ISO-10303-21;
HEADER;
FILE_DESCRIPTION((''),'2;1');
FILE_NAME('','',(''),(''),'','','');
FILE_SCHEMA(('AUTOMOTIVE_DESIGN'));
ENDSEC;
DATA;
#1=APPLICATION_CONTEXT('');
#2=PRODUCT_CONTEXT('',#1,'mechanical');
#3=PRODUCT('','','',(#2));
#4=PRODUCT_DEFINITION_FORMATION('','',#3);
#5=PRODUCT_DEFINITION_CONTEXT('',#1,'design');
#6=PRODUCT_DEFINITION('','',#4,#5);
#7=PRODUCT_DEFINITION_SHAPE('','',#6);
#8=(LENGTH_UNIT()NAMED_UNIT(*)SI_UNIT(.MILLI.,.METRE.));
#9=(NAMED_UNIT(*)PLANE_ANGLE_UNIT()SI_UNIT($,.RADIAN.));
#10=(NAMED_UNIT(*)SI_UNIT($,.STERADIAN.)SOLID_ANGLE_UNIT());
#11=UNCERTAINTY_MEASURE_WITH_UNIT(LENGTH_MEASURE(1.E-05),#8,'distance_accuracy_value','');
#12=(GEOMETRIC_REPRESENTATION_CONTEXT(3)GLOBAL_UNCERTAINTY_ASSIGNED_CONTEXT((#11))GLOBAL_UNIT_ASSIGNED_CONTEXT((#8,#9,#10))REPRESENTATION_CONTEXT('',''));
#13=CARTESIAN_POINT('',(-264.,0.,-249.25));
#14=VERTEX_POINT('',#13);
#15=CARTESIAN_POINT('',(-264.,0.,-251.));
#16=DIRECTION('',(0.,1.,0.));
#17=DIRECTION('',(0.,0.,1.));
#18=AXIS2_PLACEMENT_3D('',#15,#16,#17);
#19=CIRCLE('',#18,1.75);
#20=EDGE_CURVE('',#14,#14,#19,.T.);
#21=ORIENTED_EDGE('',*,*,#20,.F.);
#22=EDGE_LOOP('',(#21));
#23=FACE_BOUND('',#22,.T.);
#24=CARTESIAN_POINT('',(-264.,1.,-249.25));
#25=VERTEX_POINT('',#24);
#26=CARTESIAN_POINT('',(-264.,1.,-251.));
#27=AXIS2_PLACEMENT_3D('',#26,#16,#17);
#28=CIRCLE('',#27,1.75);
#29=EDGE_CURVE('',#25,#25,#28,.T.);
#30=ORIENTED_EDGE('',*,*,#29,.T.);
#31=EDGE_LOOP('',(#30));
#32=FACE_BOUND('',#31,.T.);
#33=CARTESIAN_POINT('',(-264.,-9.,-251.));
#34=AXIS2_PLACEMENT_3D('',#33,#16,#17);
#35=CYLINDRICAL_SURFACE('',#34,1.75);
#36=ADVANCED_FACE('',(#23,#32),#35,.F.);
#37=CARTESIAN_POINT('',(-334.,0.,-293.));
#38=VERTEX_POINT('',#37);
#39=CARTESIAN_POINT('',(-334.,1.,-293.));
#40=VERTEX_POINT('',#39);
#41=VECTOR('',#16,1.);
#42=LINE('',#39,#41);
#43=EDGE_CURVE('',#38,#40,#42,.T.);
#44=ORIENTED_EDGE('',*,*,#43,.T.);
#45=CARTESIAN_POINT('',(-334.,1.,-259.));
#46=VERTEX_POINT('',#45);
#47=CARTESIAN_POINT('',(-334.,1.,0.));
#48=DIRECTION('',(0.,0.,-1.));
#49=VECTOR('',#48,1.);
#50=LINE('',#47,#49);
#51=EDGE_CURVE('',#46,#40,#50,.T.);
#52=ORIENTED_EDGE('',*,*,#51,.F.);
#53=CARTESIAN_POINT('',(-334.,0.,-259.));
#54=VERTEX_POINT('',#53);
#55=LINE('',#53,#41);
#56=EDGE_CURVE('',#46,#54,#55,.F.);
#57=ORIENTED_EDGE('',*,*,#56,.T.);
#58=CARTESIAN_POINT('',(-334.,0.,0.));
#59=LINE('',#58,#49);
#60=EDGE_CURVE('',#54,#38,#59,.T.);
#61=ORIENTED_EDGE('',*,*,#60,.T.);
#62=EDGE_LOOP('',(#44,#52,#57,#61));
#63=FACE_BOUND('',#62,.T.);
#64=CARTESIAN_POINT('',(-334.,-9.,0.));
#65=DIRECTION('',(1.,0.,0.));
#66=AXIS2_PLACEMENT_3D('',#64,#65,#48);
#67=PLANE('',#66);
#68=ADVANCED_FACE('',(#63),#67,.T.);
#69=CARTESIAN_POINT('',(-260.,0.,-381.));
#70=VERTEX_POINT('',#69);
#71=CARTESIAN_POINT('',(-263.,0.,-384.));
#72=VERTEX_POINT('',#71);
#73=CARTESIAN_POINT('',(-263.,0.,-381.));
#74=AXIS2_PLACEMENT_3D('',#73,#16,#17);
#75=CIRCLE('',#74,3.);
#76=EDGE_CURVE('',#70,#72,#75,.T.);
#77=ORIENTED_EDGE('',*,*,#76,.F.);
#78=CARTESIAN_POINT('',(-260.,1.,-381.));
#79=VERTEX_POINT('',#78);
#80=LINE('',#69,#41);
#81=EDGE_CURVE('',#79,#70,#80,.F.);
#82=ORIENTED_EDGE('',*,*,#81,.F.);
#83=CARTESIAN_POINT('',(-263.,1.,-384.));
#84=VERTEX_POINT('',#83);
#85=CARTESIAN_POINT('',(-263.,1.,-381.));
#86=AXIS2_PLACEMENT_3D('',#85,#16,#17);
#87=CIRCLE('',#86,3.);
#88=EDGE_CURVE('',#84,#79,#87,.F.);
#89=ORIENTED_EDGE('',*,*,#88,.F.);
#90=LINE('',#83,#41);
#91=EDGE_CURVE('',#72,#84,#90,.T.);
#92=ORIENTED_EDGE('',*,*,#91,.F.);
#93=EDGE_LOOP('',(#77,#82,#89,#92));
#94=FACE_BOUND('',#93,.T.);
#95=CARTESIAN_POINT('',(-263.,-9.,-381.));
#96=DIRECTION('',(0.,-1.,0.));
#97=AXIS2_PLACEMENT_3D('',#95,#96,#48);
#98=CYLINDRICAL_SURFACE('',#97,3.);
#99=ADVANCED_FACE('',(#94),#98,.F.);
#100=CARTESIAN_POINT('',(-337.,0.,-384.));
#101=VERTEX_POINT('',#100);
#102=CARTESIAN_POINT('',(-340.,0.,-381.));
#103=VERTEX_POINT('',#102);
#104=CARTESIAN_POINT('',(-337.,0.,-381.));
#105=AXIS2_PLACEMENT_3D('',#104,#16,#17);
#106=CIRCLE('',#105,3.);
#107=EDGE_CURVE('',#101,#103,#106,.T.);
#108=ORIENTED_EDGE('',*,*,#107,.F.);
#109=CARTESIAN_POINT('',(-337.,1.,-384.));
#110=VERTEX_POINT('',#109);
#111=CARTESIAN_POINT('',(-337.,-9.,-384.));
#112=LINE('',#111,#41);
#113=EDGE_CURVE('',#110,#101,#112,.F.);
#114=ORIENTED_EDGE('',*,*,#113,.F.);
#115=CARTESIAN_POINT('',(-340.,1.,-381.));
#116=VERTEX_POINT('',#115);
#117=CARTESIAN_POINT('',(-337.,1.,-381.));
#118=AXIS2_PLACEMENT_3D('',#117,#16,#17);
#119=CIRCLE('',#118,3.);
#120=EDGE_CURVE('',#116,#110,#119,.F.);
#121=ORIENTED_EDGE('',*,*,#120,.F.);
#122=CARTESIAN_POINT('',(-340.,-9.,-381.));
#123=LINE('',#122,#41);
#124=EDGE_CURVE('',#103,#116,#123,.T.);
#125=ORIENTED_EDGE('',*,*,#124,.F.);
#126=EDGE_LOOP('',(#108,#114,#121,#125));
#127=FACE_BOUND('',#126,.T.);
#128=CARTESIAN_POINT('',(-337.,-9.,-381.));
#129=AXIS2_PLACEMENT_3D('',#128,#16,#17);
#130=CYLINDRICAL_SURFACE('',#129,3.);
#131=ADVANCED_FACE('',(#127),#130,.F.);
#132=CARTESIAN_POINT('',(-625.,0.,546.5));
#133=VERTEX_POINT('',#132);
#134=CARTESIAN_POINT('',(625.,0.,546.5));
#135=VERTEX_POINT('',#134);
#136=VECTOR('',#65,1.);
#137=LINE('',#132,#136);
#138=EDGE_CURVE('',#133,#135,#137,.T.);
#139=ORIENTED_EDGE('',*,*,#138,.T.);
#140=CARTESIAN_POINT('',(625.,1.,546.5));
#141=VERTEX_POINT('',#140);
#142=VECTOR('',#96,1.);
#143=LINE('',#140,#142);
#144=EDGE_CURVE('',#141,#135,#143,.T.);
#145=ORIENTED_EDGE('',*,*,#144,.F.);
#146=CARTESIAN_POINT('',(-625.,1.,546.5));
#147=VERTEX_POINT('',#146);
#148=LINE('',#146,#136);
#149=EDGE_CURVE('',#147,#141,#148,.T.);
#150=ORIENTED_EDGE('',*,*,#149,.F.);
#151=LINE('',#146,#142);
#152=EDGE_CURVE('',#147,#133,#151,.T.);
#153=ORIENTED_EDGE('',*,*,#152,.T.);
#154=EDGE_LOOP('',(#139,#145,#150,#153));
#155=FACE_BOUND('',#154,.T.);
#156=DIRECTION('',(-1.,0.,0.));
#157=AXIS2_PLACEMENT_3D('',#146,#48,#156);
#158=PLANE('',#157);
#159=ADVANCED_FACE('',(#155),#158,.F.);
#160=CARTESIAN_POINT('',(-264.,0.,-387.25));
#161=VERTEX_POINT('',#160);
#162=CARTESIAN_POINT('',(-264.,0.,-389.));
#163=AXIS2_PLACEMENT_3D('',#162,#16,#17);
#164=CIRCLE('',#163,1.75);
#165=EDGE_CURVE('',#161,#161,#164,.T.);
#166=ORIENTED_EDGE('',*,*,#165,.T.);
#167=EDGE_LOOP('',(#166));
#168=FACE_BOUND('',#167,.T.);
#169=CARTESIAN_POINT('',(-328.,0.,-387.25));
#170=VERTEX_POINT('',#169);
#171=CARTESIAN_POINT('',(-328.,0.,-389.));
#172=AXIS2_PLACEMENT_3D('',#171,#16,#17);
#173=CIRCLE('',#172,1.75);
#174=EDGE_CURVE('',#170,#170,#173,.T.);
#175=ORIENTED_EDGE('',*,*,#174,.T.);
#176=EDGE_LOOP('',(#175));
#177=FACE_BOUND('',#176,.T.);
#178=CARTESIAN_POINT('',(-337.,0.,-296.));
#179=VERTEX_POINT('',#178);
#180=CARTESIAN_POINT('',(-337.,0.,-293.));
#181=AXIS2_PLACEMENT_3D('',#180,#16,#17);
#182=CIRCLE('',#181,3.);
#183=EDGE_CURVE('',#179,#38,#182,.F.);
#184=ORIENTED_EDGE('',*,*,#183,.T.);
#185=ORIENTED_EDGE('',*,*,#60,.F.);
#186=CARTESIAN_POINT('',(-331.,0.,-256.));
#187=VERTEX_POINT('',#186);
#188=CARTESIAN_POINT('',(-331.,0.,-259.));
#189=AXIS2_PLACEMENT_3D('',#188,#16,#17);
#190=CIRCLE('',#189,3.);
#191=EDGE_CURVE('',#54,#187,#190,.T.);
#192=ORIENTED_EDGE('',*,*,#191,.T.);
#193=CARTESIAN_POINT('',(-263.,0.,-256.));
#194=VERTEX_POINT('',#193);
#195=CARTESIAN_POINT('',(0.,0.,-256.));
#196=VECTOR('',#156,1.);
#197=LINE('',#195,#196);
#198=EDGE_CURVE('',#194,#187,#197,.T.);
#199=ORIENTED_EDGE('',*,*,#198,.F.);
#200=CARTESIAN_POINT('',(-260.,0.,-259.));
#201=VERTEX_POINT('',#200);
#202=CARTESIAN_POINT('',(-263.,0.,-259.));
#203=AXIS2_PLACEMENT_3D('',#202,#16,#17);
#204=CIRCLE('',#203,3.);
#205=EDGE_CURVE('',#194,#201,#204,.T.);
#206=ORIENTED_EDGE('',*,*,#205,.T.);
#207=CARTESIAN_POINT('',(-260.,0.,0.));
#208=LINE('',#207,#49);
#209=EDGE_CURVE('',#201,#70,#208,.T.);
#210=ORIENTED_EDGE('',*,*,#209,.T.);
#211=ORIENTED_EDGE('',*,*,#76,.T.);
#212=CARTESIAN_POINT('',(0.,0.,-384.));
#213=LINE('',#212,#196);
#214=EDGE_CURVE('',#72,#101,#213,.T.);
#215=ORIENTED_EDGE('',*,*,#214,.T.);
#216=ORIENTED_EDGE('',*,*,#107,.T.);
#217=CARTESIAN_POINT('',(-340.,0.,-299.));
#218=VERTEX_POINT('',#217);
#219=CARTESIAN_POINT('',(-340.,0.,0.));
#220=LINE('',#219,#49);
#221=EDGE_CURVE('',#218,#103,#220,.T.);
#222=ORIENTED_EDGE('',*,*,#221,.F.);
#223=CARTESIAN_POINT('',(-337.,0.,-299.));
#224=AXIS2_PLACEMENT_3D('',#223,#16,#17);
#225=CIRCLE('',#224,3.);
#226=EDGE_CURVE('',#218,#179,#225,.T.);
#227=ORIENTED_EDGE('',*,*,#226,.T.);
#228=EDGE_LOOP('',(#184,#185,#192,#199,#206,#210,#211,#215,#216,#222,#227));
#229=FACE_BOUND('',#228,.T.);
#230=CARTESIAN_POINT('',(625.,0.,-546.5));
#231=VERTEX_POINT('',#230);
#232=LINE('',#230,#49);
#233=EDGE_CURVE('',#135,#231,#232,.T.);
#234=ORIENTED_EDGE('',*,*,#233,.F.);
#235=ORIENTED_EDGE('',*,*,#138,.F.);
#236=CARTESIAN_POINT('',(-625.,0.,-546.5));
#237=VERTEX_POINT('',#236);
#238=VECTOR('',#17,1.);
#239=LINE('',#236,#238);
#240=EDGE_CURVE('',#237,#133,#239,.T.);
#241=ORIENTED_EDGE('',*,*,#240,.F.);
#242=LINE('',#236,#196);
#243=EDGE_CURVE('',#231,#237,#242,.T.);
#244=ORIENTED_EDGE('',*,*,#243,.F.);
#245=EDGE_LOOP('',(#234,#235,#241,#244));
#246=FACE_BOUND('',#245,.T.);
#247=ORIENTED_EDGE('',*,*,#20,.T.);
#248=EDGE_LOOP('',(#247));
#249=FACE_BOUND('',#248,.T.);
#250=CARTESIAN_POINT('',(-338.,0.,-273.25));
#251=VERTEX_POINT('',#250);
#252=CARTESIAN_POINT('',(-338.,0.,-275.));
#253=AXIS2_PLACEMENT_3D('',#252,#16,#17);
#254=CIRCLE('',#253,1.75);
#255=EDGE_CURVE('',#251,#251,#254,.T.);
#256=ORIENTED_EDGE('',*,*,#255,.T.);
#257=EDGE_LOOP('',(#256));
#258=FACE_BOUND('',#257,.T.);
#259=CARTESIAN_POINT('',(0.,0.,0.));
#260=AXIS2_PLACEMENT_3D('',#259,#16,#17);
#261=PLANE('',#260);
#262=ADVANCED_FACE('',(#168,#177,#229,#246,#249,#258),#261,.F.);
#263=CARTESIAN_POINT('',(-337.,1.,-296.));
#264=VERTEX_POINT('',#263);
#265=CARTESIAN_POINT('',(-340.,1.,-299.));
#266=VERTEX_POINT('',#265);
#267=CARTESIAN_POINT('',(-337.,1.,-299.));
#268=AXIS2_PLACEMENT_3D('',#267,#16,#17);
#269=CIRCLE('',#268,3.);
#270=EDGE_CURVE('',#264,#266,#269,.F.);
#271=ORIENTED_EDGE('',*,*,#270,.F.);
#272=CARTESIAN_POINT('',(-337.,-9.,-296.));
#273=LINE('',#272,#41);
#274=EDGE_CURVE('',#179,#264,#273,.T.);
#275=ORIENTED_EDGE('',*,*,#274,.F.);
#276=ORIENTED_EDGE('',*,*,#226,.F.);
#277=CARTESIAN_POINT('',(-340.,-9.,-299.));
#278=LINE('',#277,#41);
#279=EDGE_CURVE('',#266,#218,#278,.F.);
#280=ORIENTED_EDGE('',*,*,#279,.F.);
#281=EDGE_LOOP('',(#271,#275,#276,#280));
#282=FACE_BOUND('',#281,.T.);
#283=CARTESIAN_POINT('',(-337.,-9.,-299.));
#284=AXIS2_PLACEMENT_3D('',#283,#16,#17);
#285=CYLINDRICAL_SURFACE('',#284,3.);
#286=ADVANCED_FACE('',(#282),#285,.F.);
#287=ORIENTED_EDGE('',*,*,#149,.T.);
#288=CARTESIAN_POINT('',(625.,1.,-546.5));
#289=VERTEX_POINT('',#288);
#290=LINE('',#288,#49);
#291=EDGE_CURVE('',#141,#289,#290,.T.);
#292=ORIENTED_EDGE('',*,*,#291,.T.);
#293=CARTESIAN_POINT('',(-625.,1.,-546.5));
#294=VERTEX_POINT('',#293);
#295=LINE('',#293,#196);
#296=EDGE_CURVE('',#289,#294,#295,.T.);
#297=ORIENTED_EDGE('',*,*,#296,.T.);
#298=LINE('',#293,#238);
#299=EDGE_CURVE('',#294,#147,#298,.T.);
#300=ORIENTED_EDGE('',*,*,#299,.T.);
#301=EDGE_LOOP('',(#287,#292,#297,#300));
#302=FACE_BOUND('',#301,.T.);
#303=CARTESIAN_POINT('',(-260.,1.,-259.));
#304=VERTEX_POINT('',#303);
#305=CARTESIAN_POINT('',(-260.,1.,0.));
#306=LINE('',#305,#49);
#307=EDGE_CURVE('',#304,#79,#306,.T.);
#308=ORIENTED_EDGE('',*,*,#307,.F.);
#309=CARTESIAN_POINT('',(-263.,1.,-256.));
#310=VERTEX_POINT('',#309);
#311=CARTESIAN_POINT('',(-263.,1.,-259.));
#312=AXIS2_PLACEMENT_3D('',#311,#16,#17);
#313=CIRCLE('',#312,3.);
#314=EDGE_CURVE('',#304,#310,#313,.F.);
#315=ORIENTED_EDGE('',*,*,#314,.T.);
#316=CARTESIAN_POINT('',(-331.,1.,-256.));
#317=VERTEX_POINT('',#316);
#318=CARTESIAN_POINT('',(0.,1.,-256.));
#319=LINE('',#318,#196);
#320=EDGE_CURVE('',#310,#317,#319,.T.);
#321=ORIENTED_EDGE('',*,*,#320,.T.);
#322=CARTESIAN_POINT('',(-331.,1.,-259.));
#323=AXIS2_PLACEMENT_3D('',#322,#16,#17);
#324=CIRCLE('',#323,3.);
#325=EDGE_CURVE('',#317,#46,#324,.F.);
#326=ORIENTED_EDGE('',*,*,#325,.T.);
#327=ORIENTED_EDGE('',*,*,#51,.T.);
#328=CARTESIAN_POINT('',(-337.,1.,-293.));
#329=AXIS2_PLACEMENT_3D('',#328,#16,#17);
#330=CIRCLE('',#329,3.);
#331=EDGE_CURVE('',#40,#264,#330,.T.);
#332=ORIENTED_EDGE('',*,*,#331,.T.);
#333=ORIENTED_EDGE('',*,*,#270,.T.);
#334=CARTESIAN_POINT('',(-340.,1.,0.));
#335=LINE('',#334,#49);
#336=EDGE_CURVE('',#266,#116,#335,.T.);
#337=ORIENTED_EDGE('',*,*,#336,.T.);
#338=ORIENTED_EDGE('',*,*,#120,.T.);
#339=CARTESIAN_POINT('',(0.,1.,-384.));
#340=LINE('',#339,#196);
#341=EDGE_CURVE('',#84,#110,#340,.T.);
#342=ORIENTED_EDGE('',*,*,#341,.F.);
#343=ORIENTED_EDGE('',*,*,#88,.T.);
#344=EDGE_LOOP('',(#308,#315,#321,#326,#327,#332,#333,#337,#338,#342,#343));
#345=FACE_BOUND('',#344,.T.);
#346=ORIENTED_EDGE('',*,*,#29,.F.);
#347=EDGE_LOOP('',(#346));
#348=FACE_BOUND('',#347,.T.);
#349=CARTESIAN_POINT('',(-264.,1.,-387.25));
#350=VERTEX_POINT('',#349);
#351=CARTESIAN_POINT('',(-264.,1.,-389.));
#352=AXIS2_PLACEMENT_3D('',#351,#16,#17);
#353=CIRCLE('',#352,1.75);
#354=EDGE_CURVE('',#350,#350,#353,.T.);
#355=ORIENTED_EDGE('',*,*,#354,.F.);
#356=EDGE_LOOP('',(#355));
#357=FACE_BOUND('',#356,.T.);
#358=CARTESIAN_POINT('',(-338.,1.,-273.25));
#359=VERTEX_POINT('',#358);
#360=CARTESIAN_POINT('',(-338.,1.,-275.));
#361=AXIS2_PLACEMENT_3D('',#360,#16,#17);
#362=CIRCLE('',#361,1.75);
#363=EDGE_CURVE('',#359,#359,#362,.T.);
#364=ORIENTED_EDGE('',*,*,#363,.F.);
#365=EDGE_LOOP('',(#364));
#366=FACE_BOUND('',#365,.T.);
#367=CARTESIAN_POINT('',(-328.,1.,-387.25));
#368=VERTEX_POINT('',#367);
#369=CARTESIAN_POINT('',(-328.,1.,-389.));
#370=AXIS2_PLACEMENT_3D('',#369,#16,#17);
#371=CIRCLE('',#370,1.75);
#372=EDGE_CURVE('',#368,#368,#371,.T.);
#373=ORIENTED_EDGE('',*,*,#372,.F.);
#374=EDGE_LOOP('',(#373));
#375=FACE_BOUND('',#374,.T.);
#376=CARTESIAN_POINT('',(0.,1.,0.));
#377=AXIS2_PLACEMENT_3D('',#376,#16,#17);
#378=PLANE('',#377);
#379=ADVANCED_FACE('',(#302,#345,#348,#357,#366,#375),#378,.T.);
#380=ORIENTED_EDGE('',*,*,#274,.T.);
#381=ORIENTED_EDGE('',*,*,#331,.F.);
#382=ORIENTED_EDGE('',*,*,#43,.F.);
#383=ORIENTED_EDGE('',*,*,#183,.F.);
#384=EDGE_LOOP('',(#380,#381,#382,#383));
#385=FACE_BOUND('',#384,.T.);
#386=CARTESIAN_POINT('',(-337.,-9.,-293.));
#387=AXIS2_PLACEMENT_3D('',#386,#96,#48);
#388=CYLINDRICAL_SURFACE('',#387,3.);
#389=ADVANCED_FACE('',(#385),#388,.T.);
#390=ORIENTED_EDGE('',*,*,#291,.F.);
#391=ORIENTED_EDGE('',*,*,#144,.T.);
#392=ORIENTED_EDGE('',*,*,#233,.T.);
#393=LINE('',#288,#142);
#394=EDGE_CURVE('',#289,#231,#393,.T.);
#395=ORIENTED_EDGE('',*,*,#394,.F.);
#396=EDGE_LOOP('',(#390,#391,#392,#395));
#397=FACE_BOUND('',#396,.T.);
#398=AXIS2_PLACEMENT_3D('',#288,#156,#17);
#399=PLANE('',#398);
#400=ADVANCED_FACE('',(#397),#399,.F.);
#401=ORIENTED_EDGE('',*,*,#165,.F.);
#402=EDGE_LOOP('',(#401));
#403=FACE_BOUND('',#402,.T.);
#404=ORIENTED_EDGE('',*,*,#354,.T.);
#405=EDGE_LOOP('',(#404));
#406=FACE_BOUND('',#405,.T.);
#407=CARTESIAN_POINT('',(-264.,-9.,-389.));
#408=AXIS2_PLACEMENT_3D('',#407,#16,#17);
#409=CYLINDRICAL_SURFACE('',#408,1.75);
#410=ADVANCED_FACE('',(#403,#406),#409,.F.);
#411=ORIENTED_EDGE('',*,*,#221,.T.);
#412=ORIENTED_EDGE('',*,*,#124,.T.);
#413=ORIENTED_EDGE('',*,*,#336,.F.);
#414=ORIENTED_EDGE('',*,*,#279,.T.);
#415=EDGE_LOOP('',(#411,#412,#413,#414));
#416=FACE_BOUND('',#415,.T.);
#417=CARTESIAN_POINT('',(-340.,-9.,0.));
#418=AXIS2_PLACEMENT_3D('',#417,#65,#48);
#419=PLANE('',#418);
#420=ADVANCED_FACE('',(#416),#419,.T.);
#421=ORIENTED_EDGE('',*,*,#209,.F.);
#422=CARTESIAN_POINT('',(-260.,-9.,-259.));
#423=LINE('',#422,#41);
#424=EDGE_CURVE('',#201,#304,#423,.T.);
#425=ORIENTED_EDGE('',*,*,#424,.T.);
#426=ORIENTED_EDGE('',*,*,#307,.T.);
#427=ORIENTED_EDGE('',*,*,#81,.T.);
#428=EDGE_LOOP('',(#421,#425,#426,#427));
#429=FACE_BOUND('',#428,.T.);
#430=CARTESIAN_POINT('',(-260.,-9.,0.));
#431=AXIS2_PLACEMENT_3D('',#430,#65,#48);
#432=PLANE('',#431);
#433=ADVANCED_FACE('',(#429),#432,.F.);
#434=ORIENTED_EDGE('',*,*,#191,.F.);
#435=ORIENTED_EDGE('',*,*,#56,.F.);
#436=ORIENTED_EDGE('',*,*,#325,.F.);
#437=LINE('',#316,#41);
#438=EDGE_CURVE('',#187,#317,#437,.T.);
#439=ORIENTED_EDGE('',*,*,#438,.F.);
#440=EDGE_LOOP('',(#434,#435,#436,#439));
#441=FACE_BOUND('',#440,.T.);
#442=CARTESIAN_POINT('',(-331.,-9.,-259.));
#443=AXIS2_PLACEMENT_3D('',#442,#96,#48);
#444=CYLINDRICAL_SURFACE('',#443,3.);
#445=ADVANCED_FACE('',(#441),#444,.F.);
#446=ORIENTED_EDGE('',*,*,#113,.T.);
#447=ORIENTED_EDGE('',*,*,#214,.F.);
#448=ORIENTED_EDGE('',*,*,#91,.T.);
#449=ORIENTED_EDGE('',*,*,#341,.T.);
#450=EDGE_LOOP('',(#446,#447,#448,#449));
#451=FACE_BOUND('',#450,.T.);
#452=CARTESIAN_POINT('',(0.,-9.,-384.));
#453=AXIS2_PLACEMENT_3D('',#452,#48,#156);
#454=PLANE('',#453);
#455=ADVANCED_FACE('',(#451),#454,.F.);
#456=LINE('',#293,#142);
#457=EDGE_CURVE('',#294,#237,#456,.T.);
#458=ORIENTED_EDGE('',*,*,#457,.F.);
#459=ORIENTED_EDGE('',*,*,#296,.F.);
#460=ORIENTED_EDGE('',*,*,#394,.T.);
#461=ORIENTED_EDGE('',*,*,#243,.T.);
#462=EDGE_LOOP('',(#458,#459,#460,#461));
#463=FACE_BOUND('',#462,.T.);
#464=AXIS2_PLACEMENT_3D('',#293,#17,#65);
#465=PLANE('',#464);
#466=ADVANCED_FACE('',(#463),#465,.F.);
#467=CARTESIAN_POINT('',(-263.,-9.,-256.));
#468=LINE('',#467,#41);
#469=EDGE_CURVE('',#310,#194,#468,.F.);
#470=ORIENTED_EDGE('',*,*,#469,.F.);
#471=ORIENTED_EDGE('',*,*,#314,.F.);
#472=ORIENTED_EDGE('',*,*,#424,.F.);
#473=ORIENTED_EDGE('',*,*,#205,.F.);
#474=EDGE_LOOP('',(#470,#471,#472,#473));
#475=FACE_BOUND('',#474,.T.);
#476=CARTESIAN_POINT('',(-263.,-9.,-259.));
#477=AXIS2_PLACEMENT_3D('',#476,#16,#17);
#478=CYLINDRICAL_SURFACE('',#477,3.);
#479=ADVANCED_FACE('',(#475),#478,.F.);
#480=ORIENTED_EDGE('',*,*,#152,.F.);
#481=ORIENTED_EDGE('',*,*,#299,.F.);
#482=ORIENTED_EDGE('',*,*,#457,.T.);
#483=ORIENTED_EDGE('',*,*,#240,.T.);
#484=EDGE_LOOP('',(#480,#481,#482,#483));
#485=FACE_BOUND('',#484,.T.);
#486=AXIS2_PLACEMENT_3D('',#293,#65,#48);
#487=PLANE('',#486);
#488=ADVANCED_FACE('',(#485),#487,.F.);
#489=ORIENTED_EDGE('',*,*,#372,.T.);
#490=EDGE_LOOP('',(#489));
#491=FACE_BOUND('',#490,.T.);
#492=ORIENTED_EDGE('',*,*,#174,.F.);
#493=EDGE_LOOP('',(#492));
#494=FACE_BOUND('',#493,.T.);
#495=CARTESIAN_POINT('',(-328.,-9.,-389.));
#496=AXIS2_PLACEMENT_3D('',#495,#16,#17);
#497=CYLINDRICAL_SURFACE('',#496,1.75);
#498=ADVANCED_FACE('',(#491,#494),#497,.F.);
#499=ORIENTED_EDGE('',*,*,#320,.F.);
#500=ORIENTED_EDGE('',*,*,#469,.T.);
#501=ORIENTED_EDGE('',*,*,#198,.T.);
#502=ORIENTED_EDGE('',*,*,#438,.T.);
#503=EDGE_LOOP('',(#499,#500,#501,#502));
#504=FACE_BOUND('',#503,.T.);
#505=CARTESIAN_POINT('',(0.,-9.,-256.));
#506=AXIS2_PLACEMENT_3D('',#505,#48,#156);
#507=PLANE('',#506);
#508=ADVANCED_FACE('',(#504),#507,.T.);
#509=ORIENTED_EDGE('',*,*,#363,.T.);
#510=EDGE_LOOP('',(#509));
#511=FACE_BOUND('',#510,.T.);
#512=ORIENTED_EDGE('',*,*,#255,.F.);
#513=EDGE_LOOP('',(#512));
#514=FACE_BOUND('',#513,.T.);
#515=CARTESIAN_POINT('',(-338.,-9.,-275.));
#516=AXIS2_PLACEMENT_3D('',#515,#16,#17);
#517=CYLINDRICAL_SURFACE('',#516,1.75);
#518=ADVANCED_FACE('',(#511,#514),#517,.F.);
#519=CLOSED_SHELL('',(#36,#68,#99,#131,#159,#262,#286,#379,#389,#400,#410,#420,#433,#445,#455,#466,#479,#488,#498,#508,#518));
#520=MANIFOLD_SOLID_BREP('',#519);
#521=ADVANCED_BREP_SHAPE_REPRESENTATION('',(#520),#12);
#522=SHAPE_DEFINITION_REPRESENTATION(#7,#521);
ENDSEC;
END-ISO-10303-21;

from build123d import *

# Parameters (mm, degrees)
SKETCH1_W           = 1250
SKETCH1_H           = 1093
BOSS_EXTRUDE1_DEPTH = 1
CUT_EXTRUDE1_DEPTH  = 10
FILLET2_R           = 3
SKETCH3_R           = 1.75
CUT_EXTRUDE2_DEPTH  = 10


with BuildPart() as part:
    # Sketch1 → Boss-Extrude1 (new body)
    with BuildSketch(Plane(origin=(0, 0, 0), x_dir=(1, 0, 0), z_dir=(0, 1, 0))):
        Rectangle(SKETCH1_W, SKETCH1_H)
    extrude(amount=BOSS_EXTRUDE1_DEPTH)

    # Sketch2 → Cut-Extrude1 (cut)
    with BuildSketch(Plane(origin=(0, 1, 0), x_dir=(1, 0, 0), z_dir=(0, 1, 0))):
        Polygon((-334, 256), (-260, 256), (-260, 384), (-340, 384), (-340, 296), (-334, 296), align=None)
    extrude(amount=-CUT_EXTRUDE1_DEPTH, mode=Mode.SUBTRACT)

    # Fillet2
    fillet2_edges = [part.edges().sort_by_distance(p)[0] for p in [
        (-260, 0.5, -256),
        (-334, 0.5, -256),
        (-334, 0.5, -296),
        (-340, 0.5, -296),
        (-340, 0.5, -384),
        (-260, 0.5, -384),
    ]]
    fillet(fillet2_edges, radius=FILLET2_R - 0.0001)  # a hair under: the kernel refuses the full size

    # Sketch3 → Cut-Extrude2 (cut)
    with BuildSketch(Plane(origin=(0, 1, 0), x_dir=(1, 0, 0), z_dir=(0, 1, 0))):
        with Locations(Location((-264, 389, 0), (0, 0, 270))):
            Circle(SKETCH3_R)
        with Locations(Location((-328, 389, 0), (0, 0, 270))):
            Circle(SKETCH3_R)
        with Locations(Location((-338, 275, 0), (0, 0, 270))):
            Circle(SKETCH3_R)
        with Locations(Location((-264, 251, 0), (0, 0, 270))):
            Circle(SKETCH3_R)
    extrude(amount=-CUT_EXTRUDE2_DEPTH, mode=Mode.SUBTRACT)


solid = part.part
